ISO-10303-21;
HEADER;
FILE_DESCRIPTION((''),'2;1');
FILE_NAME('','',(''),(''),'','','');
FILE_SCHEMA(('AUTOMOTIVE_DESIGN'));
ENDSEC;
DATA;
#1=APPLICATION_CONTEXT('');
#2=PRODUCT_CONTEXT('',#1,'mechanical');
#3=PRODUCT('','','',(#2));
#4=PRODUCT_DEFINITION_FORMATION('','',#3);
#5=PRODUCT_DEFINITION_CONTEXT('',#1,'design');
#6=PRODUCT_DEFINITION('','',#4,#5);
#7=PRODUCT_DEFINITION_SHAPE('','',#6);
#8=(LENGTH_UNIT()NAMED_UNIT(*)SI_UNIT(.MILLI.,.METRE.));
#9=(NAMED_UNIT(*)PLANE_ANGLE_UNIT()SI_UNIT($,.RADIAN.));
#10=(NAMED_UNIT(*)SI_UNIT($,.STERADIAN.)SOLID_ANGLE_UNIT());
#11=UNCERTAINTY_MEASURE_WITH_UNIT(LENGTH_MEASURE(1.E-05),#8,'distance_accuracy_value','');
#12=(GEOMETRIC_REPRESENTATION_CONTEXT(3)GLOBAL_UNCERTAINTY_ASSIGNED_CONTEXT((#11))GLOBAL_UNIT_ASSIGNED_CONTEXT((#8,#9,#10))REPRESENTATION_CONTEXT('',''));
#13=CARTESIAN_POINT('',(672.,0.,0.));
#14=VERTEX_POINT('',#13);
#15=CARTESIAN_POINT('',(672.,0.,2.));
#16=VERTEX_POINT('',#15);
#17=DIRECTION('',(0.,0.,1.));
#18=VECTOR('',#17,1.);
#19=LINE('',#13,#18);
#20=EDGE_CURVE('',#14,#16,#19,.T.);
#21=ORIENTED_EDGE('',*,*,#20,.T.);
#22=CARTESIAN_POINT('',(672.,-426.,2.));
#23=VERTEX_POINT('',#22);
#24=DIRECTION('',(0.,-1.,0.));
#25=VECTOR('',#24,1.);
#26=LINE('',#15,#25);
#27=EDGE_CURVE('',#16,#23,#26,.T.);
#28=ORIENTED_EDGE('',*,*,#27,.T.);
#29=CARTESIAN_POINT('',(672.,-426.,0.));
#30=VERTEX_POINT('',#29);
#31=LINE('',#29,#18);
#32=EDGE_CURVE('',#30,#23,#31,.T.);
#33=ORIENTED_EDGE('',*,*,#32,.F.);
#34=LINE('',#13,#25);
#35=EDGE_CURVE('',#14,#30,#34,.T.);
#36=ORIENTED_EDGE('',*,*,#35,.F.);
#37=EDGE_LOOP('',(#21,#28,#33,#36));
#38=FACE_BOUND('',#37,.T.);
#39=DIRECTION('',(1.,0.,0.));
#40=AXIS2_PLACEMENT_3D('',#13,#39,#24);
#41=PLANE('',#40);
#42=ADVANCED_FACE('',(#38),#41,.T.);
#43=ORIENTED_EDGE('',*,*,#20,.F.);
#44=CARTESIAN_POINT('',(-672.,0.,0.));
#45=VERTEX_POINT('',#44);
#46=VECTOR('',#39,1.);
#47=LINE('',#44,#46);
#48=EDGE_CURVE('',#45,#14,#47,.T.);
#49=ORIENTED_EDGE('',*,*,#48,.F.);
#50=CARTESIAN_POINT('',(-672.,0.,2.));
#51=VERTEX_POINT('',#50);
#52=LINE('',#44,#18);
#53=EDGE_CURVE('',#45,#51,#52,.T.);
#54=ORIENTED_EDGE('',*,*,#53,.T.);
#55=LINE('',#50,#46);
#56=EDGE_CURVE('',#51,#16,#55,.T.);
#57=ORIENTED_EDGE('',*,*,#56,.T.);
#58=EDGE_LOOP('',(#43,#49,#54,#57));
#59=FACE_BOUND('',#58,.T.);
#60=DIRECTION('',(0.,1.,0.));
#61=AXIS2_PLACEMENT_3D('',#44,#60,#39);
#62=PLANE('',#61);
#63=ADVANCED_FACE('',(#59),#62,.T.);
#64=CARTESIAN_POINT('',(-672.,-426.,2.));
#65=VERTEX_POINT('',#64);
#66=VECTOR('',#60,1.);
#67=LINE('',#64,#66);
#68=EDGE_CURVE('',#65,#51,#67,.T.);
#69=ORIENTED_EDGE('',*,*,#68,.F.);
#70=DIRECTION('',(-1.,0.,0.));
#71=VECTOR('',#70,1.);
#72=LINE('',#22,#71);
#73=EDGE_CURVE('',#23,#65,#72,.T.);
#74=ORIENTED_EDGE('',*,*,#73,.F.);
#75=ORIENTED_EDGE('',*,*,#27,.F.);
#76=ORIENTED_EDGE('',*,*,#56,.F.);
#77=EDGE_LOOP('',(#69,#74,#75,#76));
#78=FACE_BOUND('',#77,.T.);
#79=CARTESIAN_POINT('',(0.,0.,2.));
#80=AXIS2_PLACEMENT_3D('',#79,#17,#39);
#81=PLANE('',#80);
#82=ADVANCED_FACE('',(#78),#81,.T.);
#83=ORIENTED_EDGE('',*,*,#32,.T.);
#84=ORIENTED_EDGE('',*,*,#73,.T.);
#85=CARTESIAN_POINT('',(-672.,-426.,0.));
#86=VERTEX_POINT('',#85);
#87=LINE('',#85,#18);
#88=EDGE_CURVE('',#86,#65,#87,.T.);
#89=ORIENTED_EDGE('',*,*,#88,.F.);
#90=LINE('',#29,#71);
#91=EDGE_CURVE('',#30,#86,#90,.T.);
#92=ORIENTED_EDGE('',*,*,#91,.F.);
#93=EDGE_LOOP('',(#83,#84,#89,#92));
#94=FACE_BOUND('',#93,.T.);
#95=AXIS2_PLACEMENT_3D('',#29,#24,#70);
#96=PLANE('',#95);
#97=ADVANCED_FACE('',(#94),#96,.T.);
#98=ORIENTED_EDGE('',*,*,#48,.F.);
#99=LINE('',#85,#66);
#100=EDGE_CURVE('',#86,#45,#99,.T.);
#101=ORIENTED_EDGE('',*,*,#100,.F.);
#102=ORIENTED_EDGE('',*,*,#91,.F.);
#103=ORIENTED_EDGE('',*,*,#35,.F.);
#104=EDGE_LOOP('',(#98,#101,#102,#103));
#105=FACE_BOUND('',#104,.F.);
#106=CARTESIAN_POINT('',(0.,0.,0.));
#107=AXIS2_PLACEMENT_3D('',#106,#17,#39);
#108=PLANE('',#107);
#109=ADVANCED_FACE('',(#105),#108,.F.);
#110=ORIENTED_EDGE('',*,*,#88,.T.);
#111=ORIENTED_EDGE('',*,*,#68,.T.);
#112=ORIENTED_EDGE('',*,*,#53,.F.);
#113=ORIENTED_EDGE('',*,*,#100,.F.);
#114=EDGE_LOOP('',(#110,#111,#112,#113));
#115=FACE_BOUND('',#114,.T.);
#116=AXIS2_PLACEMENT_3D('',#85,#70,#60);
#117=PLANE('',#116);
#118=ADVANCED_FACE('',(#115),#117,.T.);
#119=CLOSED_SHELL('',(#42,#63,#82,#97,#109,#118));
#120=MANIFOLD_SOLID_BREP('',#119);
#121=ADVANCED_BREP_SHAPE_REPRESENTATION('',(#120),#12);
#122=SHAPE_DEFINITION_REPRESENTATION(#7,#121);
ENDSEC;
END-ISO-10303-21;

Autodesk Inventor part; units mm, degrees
ref_plane "YZ Plane" through (0, 0, 0) normal (1, 0, 0) x (0, 1, 0)
ref_plane "XZ Plane" through (0, 0, 0) normal (0, 1, 0) x (-1, 0, 0)
ref_plane "XY Plane" through (0, 0, 0) normal (0, 0, 1) x (1, 0, 0)
sketch "Sketch1" plane through (0, 0, 0) normal (0, 0, 1) x (1, 0, 0)
  line L0 (-672, 0) -> (672, 0)
  line L1 (672, 0) -> (672, -426)
  line L2 (672, -426) -> (-672, -426)
  line L3 (-672, -426) -> (-672, 0)
  point P0 (0, 0)
  point P1 (0, 0)
  dimension "d0" = 1344
  dimension "d1" = 426
extrude "Plate1" add sketch "Sketch1" along normal blind 2
sketch "Sketch2" plane through (0, 0, 2) normal (0, 0, 1) x (1, 0, 0)
  line L0 (-55, -376) -> (-55, -364) construction
  line L1 (-55, -364) -> (55, -364) construction
  line L2 (55, -364) -> (55, -376) construction
  line L3 (55, -376) -> (-55, -376) construction
  line L4 (672, -426) -> (-672, -426) projected
  point P0 (0, 0)
  point P1 (0, -376)
  point P2 (0, -426)
  dimension "d3" = 12
  dimension "d4" = 110
  dimension "d5" = 50
mark "Mark1"
equation "\"d2\" = Thickness"
equation "\"BendReliefWidth\" = Thickness"
equation "\"BendReliefDepth\" = 0.5 * Thickness"
equation "\"CornerReliefSize\" = 4 * Thickness"
equation "\"MinimumRemnant\" = 2 * Thickness"
equation "\"TransitionRadius\" = BendRadius"
equation "\"JacobiRadiusSize\" = BendRadius"
equation "\"GapSize\" = Thickness"
equation "\"Thickness\" = 2"
equation "\"BendRadius\" = 2.75"
properties part number "MSC 076 face 3" material "Stainless Steel"
